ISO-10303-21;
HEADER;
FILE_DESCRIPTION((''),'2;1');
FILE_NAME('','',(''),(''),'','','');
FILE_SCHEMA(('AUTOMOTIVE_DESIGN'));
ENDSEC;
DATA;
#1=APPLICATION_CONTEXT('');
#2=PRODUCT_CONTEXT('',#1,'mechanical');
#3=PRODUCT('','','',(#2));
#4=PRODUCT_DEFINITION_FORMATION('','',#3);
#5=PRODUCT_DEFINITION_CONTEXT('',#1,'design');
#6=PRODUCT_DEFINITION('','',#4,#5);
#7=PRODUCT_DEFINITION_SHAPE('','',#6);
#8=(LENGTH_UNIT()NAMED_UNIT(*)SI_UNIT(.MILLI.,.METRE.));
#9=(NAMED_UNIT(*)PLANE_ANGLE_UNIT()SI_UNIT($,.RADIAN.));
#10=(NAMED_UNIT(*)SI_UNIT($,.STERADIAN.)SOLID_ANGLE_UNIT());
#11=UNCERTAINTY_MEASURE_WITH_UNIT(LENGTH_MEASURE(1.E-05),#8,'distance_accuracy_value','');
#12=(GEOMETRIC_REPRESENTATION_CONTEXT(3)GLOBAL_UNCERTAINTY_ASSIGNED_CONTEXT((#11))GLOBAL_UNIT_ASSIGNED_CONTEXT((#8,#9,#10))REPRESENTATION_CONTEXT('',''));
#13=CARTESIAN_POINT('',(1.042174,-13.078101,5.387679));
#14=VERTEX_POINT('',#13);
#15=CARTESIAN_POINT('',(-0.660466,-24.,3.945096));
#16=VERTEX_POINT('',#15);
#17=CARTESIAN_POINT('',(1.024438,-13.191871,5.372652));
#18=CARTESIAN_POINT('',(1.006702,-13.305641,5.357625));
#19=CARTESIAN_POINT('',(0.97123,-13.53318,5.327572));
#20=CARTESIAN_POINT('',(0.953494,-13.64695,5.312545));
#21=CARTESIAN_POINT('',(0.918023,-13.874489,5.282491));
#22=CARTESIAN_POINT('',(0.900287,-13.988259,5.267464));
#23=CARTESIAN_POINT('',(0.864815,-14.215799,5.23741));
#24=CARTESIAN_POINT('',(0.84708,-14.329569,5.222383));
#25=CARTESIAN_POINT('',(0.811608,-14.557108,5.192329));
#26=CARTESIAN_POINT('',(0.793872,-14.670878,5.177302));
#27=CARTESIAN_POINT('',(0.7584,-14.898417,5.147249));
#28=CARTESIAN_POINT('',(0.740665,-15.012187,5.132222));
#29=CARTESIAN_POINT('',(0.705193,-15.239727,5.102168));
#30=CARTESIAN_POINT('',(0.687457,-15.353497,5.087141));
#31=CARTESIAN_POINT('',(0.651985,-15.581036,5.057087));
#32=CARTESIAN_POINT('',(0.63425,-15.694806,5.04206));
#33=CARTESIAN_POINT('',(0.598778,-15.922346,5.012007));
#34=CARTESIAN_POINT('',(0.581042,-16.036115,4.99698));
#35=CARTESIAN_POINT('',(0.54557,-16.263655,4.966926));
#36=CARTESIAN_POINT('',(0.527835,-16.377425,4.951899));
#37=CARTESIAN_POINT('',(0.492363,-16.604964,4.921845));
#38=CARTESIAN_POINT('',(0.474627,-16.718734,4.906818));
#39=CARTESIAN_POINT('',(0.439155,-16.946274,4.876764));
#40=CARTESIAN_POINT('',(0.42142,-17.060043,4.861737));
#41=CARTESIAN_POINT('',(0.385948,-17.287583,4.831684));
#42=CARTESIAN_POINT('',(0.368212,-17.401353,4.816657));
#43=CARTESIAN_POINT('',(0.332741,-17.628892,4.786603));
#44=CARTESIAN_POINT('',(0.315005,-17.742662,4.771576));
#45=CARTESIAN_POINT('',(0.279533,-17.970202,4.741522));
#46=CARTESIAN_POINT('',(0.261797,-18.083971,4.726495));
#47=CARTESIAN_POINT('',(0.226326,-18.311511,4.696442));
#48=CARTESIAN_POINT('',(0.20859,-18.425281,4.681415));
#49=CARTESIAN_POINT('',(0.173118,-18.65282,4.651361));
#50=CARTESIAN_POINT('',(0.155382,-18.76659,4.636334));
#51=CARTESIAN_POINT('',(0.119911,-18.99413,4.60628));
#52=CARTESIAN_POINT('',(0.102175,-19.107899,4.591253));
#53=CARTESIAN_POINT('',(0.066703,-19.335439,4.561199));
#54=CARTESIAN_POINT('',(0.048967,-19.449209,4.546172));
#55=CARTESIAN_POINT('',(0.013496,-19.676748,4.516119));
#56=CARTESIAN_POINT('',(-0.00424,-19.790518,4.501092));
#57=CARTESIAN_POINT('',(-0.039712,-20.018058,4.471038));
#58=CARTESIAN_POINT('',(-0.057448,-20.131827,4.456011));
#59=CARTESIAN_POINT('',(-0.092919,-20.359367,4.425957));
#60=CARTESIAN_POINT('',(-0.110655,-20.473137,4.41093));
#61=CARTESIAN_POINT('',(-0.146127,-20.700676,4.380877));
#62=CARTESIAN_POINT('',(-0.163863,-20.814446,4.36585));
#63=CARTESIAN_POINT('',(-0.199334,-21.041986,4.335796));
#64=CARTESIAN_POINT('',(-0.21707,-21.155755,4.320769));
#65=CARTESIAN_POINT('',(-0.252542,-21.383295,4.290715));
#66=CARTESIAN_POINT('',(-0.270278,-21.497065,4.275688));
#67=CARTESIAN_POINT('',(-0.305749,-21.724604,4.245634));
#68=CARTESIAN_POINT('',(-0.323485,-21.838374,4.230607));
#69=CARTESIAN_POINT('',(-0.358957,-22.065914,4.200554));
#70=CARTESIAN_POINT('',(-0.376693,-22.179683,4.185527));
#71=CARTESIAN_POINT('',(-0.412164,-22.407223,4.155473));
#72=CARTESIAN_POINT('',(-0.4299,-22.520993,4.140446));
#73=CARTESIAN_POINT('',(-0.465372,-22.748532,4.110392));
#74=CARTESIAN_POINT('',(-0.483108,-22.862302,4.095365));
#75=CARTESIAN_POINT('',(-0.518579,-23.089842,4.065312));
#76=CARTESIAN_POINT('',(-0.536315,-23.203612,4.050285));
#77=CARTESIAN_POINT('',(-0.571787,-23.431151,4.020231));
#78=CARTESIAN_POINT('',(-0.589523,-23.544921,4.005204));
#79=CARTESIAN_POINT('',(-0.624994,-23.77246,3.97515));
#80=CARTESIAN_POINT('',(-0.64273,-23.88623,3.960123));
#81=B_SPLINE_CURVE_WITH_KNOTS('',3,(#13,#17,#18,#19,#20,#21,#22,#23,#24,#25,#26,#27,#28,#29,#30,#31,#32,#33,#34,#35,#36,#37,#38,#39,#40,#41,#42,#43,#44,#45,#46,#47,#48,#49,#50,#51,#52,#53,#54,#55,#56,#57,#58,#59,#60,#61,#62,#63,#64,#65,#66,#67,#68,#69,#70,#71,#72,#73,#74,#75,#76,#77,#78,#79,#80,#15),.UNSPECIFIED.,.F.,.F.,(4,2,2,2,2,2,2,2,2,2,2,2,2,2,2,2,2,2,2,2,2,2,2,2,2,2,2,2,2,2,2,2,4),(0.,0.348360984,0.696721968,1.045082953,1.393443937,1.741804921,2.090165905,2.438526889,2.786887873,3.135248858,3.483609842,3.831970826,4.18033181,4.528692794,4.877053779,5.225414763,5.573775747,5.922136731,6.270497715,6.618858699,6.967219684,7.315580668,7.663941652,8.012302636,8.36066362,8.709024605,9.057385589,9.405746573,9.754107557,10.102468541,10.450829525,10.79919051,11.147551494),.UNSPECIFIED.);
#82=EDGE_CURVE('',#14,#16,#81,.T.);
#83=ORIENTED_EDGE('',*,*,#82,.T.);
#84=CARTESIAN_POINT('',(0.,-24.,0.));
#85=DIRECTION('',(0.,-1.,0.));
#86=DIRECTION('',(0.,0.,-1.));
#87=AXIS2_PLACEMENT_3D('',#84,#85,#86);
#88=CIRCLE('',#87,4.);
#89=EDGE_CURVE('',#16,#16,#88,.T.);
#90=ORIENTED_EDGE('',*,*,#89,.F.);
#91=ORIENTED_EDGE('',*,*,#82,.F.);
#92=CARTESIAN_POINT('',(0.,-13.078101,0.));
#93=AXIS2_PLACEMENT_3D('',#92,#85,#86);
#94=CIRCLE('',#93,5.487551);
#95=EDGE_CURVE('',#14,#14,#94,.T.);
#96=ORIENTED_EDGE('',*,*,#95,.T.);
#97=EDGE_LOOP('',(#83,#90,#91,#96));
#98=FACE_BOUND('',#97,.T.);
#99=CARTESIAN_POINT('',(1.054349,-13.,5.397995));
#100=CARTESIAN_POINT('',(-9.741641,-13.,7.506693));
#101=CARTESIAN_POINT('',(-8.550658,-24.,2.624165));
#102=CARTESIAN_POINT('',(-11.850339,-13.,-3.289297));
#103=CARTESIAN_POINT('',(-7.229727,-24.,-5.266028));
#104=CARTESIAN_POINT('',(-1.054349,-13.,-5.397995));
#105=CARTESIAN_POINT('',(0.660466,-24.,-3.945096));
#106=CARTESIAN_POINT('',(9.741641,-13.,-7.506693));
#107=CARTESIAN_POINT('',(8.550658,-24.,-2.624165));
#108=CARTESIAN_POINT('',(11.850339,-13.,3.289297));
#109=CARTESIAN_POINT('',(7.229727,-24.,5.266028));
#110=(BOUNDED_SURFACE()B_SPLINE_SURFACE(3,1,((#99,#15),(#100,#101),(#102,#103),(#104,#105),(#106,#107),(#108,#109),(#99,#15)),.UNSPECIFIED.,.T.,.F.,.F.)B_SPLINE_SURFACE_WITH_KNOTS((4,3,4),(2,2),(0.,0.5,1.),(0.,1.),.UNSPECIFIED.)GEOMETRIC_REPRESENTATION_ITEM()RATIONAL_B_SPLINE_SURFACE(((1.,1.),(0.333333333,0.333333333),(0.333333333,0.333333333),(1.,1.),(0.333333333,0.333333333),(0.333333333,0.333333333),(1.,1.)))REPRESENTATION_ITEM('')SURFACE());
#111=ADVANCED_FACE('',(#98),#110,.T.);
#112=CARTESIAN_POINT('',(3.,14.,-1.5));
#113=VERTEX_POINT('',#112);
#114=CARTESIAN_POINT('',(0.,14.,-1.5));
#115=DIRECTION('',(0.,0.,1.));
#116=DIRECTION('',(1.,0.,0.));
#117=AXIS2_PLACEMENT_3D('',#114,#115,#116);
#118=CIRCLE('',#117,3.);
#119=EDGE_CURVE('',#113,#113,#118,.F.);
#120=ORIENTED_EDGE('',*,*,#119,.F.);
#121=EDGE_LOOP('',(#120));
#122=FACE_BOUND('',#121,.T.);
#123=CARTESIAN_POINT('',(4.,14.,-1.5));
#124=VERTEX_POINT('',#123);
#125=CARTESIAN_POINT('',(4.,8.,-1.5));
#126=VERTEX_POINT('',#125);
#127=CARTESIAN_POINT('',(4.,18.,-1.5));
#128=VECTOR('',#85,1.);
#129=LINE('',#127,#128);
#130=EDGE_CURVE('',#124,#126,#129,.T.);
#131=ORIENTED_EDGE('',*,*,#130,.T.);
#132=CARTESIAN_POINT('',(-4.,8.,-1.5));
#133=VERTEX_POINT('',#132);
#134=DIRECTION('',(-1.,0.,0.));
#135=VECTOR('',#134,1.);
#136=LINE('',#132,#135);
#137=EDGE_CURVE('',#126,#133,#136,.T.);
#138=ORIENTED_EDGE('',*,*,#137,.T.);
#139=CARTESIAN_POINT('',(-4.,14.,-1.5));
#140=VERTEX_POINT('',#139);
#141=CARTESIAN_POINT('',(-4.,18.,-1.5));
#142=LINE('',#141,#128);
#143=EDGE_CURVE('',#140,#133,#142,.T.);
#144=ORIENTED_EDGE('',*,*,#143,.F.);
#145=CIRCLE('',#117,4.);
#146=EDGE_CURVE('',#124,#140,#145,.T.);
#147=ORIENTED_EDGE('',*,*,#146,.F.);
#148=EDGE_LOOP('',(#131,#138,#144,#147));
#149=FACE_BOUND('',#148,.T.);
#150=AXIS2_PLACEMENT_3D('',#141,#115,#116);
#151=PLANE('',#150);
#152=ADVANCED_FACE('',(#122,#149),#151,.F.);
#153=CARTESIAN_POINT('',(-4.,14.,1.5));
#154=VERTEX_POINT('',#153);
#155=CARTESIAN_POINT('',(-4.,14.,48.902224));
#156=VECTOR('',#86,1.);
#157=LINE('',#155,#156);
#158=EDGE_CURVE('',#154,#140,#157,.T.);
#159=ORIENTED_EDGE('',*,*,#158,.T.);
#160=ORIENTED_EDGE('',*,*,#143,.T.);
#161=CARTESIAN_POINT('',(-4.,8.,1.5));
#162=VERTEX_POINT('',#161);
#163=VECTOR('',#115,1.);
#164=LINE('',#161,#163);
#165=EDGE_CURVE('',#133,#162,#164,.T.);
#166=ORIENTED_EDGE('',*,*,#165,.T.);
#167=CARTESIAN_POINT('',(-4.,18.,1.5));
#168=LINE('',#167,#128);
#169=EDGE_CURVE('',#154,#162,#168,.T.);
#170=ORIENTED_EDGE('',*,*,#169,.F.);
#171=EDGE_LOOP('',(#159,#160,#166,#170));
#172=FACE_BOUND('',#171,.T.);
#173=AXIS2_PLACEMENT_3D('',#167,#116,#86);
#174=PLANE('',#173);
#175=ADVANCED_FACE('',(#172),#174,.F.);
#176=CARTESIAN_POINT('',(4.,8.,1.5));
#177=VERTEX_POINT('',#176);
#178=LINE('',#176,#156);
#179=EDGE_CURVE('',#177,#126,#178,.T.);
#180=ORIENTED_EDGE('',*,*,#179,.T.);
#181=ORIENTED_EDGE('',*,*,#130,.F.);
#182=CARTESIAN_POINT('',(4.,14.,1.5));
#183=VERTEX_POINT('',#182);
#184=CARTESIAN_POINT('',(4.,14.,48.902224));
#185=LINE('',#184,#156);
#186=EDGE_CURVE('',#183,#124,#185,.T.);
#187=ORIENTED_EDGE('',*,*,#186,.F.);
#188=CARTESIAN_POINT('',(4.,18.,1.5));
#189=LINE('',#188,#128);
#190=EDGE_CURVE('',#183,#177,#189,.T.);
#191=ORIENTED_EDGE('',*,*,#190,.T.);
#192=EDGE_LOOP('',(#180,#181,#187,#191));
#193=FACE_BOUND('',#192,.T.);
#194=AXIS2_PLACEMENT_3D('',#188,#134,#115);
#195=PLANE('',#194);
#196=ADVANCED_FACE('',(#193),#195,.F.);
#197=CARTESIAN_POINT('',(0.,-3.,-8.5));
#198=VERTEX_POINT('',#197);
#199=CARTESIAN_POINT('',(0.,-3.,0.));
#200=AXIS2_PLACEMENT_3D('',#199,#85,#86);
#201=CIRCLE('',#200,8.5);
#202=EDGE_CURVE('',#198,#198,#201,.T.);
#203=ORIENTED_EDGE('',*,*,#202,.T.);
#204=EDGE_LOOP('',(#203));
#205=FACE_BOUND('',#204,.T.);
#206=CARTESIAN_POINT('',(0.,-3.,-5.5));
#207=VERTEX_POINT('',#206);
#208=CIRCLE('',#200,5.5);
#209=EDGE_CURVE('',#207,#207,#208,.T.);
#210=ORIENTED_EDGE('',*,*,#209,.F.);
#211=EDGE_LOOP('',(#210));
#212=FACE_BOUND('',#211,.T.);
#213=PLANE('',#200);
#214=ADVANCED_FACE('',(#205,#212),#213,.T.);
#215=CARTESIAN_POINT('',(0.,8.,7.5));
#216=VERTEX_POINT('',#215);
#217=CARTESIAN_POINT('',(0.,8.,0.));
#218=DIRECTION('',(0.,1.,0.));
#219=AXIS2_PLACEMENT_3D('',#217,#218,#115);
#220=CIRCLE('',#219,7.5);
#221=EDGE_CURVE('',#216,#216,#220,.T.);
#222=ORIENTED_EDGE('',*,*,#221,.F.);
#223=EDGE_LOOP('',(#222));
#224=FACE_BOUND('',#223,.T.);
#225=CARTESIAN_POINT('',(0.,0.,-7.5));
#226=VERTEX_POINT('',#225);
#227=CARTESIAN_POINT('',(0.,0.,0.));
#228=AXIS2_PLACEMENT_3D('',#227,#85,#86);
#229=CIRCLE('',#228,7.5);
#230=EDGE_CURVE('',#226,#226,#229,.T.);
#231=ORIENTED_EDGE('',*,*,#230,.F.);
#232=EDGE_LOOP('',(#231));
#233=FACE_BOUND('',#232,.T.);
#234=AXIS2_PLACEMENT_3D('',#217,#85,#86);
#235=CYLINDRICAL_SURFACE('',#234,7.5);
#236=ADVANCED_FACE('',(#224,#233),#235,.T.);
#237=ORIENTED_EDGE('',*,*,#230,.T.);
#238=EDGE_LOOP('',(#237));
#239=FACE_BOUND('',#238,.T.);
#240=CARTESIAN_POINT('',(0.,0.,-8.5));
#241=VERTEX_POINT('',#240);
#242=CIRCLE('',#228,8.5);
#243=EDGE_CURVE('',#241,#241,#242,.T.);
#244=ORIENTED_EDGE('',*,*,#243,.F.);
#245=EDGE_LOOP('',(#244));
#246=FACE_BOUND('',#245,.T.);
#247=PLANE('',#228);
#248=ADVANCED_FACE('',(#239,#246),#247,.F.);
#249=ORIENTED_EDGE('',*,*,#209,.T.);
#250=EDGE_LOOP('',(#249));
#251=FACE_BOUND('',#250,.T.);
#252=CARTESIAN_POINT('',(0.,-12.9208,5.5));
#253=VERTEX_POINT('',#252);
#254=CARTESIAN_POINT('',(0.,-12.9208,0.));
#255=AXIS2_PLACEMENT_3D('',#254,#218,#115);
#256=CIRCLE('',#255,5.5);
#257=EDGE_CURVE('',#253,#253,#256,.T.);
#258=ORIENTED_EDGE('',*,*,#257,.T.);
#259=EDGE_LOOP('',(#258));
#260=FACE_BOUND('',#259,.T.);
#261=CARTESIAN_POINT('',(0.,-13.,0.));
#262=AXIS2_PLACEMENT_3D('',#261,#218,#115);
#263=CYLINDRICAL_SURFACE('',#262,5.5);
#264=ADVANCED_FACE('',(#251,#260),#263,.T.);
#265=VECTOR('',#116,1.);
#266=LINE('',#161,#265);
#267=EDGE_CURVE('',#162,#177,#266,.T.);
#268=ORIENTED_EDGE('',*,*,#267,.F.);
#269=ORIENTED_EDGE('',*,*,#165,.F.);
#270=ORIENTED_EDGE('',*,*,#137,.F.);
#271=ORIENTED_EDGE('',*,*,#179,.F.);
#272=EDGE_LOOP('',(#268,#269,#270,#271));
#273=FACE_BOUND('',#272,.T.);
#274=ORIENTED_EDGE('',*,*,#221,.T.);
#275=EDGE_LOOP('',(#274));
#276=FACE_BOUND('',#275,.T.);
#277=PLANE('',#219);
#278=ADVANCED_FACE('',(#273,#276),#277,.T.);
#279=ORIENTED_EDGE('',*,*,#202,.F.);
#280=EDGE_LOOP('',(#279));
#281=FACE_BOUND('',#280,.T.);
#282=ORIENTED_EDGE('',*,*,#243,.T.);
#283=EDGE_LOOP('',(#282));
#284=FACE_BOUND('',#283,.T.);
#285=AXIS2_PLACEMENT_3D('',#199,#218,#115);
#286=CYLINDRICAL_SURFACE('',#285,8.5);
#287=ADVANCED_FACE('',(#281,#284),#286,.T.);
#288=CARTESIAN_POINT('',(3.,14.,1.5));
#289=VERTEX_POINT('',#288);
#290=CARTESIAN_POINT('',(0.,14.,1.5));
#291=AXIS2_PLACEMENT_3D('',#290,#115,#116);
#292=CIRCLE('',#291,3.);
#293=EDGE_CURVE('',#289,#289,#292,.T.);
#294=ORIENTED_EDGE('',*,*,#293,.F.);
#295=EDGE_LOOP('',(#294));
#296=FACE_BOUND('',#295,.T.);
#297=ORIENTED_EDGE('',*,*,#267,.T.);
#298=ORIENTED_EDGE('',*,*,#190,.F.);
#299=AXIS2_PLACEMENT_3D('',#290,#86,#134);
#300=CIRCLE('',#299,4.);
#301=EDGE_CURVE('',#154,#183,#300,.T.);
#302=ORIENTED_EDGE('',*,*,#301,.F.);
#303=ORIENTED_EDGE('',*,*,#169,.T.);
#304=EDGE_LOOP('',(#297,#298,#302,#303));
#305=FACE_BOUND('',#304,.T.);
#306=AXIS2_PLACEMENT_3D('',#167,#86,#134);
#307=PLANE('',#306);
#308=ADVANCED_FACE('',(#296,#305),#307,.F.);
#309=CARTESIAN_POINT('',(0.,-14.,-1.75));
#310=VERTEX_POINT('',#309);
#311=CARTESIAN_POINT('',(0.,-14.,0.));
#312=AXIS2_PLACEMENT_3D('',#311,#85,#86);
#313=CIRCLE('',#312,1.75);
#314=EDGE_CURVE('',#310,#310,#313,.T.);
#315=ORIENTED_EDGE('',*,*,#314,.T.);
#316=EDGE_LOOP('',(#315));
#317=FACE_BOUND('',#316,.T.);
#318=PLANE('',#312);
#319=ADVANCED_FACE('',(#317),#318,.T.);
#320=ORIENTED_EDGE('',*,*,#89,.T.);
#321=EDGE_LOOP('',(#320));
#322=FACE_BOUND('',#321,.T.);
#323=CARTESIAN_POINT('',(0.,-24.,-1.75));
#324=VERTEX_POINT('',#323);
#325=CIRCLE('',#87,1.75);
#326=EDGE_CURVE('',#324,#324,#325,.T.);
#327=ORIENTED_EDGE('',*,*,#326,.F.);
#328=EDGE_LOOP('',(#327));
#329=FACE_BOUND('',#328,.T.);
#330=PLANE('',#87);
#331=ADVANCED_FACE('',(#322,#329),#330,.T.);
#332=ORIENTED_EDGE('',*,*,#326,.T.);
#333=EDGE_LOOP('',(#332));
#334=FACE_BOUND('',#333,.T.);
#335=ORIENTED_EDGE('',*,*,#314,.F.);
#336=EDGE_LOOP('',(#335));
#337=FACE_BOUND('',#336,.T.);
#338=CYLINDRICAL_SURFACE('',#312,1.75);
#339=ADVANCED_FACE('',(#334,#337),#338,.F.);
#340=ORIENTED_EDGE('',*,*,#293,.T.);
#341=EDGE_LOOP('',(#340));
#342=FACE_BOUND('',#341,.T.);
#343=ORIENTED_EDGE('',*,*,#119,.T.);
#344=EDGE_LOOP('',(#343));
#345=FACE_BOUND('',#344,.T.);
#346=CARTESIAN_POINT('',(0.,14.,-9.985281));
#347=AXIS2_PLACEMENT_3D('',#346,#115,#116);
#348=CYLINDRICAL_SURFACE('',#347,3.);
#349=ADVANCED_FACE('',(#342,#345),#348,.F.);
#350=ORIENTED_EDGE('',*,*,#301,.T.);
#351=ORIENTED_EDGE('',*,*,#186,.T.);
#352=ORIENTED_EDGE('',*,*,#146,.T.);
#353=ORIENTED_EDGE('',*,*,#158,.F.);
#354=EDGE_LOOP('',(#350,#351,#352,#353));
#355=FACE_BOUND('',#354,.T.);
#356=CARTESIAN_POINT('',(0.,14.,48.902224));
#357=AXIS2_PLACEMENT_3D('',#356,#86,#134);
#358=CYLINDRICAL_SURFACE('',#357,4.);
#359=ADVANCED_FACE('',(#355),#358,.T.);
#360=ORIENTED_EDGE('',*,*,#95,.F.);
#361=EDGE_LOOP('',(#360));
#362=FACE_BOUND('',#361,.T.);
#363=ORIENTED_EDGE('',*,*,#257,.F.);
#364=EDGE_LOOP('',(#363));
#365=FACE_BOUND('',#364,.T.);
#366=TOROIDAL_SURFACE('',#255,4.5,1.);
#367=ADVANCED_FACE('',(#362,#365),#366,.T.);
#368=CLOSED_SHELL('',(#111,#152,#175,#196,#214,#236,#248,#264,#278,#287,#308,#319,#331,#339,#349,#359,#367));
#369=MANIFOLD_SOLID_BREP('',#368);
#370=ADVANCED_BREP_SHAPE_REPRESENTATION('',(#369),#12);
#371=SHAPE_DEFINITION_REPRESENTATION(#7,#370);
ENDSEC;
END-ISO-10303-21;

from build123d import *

# Parameters (mm, degrees)
ESBO_O1_R                  = 7.5
RESSALTO_EXTRUS_O1_DEPTH   = 8
ESBO_O2_R                  = 8.5
RESSALTO_EXTRUS_O2_DEPTH   = 3
ESBO_O3_W                  = 8
ESBO_O3_H                  = 3
RESSALTO_EXTRUS_O3_DEPTH   = 10
CORTE_EXTRUS_O1_DEPTH      = 23.27666941
CORTE_EXTRUS_O1_DEPTH_BACK = 23.27666941
ESBO_O5_R                  = 3
CORTE_EXTRUS_O2_DEPTH      = 3
ESBO_O6_R                  = 5.5
RESSALTO_EXTRUS_O4_DEPTH   = 10
FILETE1_R                  = 1
SKETCH1_R                  = 1.75
CUT_EXTRUDE1_DEPTH         = 10


with BuildPart() as part:
    # Esboço1 → Ressalto-extrusão1 (new body)
    with BuildSketch(Plane(origin=(0, 0, 0), x_dir=(1, 0, 0), z_dir=(0, 1, 0))):
        with Locations(Location((0, 0, 0), (0, 0, 270))):
            Circle(ESBO_O1_R)
    extrude(amount=RESSALTO_EXTRUS_O1_DEPTH)

    # Esboço2 → Ressalto-extrusão2 (add)
    with BuildSketch(Plane.XZ):
        with Locations(Location((0, 0, 0), (0, 0, 270))):
            Circle(ESBO_O2_R)
    extrude(amount=RESSALTO_EXTRUS_O2_DEPTH)

    # Esboço3 → Ressalto-extrusão3 (add)
    with BuildSketch(Plane(origin=(0, 8, 0), x_dir=(1, 0, 0), z_dir=(0, 1, 0))):
        Rectangle(ESBO_O3_W, ESBO_O3_H)
    extrude(amount=RESSALTO_EXTRUS_O3_DEPTH)

    # Esboço4 → Corte-extrusão1 (cut, two sides: drawn at the far end of the back side and taken through both)
    with BuildSketch(Plane.XY.offset(1.5).offset(-CORTE_EXTRUS_O1_DEPTH_BACK)):
        with BuildLine():
            Line((-4, 18), (-4, 13.999999871))
            ThreePointArc((-4, 13.999999871), (-2.828427176, 16.828427073), (-1.7e-08, 18))
            Line((-1.7e-08, 18), (-4, 18))
        make_face()
        with BuildLine():
            Line((4, 18), (-1.7e-08, 18))
            ThreePointArc((-1.7e-08, 18), (2.828427119, 16.828427131), (4, 14))
            Line((4, 14), (4, 18))
        make_face()
    extrude(amount=CORTE_EXTRUS_O1_DEPTH + CORTE_EXTRUS_O1_DEPTH_BACK, mode=Mode.SUBTRACT)

    # Esboço5 → Corte-extrusão2 (cut)
    with BuildSketch(Plane.XY.offset(1.5)):
        with Locations((0, 14)):
            Circle(ESBO_O5_R)
    extrude(amount=-CORTE_EXTRUS_O2_DEPTH, mode=Mode.SUBTRACT)

    # Esboço6 → Ressalto-extrusão4 (add)
    with BuildSketch(Plane.XZ.offset(3)):
        with Locations(Location((0, 0, 0), (0, 0, 270))):
            Circle(ESBO_O6_R)
    extrude(amount=RESSALTO_EXTRUS_O4_DEPTH)

    # Loft1: read off the stored shape, not the designer's step
    # Loft1: loft between two sections, ruled curve by curve
    loft1_from = [
        Edge.make_bspline([(1.054348973, -13, 5.397994835), (-9.741640698, -13, 7.506692781), (-11.850338644, -13, -3.28929689), (-1.054348973, -13, -5.397994835), (9.741640698, -13, -7.506692781), (11.850338644, -13, 3.28929689), (1.054348973, -13, 5.397994835)], [0, 0, 0, 0, 0.5, 0.5, 0.5, 1, 1, 1, 1], 3, [1, 0.333333333, 0.333333333, 1, 0.333333333, 0.333333333, 1]),
    ]
    loft1_to = [
        Edge.make_bspline([(-0.660465845, -24, 3.945096307), (-8.550658458, -24, 2.624164617), (-7.229726768, -24, -5.266027996), (0.660465845, -24, -3.945096307), (8.550658458, -24, -2.624164617), (7.229726768, -24, 5.266027996), (-0.660465845, -24, 3.945096307)], [0, 0, 0, 0, 0.5, 0.5, 0.5, 1, 1, 1, 1], 3, [1, 0.333333333, 0.333333333, 1, 0.333333333, 0.333333333, 1]),
    ]
    loft1 = Solid(Shell([*[Face.make_surface_from_curves(loft1_from[k], loft1_to[k]) for k in range(1)], Face(Wire(loft1_from)), Face(Wire(loft1_to))]))
    add(loft1)

    # Filete1
    filete1_edges = [part.edges().sort_by_distance(p)[0] for p in [
        (-5.474439314, -13, 0.529635915),
    ]]
    fillet(filete1_edges, radius=FILETE1_R)

    # Sketch1 → Cut-Extrude1 (cut)
    with BuildSketch(Plane.XZ.offset(24)):
        with Locations(Location((0, 0, 0), (0, 0, 270))):
            Circle(SKETCH1_R)
    extrude(amount=-CUT_EXTRUDE1_DEPTH, mode=Mode.SUBTRACT)


solid = part.part
